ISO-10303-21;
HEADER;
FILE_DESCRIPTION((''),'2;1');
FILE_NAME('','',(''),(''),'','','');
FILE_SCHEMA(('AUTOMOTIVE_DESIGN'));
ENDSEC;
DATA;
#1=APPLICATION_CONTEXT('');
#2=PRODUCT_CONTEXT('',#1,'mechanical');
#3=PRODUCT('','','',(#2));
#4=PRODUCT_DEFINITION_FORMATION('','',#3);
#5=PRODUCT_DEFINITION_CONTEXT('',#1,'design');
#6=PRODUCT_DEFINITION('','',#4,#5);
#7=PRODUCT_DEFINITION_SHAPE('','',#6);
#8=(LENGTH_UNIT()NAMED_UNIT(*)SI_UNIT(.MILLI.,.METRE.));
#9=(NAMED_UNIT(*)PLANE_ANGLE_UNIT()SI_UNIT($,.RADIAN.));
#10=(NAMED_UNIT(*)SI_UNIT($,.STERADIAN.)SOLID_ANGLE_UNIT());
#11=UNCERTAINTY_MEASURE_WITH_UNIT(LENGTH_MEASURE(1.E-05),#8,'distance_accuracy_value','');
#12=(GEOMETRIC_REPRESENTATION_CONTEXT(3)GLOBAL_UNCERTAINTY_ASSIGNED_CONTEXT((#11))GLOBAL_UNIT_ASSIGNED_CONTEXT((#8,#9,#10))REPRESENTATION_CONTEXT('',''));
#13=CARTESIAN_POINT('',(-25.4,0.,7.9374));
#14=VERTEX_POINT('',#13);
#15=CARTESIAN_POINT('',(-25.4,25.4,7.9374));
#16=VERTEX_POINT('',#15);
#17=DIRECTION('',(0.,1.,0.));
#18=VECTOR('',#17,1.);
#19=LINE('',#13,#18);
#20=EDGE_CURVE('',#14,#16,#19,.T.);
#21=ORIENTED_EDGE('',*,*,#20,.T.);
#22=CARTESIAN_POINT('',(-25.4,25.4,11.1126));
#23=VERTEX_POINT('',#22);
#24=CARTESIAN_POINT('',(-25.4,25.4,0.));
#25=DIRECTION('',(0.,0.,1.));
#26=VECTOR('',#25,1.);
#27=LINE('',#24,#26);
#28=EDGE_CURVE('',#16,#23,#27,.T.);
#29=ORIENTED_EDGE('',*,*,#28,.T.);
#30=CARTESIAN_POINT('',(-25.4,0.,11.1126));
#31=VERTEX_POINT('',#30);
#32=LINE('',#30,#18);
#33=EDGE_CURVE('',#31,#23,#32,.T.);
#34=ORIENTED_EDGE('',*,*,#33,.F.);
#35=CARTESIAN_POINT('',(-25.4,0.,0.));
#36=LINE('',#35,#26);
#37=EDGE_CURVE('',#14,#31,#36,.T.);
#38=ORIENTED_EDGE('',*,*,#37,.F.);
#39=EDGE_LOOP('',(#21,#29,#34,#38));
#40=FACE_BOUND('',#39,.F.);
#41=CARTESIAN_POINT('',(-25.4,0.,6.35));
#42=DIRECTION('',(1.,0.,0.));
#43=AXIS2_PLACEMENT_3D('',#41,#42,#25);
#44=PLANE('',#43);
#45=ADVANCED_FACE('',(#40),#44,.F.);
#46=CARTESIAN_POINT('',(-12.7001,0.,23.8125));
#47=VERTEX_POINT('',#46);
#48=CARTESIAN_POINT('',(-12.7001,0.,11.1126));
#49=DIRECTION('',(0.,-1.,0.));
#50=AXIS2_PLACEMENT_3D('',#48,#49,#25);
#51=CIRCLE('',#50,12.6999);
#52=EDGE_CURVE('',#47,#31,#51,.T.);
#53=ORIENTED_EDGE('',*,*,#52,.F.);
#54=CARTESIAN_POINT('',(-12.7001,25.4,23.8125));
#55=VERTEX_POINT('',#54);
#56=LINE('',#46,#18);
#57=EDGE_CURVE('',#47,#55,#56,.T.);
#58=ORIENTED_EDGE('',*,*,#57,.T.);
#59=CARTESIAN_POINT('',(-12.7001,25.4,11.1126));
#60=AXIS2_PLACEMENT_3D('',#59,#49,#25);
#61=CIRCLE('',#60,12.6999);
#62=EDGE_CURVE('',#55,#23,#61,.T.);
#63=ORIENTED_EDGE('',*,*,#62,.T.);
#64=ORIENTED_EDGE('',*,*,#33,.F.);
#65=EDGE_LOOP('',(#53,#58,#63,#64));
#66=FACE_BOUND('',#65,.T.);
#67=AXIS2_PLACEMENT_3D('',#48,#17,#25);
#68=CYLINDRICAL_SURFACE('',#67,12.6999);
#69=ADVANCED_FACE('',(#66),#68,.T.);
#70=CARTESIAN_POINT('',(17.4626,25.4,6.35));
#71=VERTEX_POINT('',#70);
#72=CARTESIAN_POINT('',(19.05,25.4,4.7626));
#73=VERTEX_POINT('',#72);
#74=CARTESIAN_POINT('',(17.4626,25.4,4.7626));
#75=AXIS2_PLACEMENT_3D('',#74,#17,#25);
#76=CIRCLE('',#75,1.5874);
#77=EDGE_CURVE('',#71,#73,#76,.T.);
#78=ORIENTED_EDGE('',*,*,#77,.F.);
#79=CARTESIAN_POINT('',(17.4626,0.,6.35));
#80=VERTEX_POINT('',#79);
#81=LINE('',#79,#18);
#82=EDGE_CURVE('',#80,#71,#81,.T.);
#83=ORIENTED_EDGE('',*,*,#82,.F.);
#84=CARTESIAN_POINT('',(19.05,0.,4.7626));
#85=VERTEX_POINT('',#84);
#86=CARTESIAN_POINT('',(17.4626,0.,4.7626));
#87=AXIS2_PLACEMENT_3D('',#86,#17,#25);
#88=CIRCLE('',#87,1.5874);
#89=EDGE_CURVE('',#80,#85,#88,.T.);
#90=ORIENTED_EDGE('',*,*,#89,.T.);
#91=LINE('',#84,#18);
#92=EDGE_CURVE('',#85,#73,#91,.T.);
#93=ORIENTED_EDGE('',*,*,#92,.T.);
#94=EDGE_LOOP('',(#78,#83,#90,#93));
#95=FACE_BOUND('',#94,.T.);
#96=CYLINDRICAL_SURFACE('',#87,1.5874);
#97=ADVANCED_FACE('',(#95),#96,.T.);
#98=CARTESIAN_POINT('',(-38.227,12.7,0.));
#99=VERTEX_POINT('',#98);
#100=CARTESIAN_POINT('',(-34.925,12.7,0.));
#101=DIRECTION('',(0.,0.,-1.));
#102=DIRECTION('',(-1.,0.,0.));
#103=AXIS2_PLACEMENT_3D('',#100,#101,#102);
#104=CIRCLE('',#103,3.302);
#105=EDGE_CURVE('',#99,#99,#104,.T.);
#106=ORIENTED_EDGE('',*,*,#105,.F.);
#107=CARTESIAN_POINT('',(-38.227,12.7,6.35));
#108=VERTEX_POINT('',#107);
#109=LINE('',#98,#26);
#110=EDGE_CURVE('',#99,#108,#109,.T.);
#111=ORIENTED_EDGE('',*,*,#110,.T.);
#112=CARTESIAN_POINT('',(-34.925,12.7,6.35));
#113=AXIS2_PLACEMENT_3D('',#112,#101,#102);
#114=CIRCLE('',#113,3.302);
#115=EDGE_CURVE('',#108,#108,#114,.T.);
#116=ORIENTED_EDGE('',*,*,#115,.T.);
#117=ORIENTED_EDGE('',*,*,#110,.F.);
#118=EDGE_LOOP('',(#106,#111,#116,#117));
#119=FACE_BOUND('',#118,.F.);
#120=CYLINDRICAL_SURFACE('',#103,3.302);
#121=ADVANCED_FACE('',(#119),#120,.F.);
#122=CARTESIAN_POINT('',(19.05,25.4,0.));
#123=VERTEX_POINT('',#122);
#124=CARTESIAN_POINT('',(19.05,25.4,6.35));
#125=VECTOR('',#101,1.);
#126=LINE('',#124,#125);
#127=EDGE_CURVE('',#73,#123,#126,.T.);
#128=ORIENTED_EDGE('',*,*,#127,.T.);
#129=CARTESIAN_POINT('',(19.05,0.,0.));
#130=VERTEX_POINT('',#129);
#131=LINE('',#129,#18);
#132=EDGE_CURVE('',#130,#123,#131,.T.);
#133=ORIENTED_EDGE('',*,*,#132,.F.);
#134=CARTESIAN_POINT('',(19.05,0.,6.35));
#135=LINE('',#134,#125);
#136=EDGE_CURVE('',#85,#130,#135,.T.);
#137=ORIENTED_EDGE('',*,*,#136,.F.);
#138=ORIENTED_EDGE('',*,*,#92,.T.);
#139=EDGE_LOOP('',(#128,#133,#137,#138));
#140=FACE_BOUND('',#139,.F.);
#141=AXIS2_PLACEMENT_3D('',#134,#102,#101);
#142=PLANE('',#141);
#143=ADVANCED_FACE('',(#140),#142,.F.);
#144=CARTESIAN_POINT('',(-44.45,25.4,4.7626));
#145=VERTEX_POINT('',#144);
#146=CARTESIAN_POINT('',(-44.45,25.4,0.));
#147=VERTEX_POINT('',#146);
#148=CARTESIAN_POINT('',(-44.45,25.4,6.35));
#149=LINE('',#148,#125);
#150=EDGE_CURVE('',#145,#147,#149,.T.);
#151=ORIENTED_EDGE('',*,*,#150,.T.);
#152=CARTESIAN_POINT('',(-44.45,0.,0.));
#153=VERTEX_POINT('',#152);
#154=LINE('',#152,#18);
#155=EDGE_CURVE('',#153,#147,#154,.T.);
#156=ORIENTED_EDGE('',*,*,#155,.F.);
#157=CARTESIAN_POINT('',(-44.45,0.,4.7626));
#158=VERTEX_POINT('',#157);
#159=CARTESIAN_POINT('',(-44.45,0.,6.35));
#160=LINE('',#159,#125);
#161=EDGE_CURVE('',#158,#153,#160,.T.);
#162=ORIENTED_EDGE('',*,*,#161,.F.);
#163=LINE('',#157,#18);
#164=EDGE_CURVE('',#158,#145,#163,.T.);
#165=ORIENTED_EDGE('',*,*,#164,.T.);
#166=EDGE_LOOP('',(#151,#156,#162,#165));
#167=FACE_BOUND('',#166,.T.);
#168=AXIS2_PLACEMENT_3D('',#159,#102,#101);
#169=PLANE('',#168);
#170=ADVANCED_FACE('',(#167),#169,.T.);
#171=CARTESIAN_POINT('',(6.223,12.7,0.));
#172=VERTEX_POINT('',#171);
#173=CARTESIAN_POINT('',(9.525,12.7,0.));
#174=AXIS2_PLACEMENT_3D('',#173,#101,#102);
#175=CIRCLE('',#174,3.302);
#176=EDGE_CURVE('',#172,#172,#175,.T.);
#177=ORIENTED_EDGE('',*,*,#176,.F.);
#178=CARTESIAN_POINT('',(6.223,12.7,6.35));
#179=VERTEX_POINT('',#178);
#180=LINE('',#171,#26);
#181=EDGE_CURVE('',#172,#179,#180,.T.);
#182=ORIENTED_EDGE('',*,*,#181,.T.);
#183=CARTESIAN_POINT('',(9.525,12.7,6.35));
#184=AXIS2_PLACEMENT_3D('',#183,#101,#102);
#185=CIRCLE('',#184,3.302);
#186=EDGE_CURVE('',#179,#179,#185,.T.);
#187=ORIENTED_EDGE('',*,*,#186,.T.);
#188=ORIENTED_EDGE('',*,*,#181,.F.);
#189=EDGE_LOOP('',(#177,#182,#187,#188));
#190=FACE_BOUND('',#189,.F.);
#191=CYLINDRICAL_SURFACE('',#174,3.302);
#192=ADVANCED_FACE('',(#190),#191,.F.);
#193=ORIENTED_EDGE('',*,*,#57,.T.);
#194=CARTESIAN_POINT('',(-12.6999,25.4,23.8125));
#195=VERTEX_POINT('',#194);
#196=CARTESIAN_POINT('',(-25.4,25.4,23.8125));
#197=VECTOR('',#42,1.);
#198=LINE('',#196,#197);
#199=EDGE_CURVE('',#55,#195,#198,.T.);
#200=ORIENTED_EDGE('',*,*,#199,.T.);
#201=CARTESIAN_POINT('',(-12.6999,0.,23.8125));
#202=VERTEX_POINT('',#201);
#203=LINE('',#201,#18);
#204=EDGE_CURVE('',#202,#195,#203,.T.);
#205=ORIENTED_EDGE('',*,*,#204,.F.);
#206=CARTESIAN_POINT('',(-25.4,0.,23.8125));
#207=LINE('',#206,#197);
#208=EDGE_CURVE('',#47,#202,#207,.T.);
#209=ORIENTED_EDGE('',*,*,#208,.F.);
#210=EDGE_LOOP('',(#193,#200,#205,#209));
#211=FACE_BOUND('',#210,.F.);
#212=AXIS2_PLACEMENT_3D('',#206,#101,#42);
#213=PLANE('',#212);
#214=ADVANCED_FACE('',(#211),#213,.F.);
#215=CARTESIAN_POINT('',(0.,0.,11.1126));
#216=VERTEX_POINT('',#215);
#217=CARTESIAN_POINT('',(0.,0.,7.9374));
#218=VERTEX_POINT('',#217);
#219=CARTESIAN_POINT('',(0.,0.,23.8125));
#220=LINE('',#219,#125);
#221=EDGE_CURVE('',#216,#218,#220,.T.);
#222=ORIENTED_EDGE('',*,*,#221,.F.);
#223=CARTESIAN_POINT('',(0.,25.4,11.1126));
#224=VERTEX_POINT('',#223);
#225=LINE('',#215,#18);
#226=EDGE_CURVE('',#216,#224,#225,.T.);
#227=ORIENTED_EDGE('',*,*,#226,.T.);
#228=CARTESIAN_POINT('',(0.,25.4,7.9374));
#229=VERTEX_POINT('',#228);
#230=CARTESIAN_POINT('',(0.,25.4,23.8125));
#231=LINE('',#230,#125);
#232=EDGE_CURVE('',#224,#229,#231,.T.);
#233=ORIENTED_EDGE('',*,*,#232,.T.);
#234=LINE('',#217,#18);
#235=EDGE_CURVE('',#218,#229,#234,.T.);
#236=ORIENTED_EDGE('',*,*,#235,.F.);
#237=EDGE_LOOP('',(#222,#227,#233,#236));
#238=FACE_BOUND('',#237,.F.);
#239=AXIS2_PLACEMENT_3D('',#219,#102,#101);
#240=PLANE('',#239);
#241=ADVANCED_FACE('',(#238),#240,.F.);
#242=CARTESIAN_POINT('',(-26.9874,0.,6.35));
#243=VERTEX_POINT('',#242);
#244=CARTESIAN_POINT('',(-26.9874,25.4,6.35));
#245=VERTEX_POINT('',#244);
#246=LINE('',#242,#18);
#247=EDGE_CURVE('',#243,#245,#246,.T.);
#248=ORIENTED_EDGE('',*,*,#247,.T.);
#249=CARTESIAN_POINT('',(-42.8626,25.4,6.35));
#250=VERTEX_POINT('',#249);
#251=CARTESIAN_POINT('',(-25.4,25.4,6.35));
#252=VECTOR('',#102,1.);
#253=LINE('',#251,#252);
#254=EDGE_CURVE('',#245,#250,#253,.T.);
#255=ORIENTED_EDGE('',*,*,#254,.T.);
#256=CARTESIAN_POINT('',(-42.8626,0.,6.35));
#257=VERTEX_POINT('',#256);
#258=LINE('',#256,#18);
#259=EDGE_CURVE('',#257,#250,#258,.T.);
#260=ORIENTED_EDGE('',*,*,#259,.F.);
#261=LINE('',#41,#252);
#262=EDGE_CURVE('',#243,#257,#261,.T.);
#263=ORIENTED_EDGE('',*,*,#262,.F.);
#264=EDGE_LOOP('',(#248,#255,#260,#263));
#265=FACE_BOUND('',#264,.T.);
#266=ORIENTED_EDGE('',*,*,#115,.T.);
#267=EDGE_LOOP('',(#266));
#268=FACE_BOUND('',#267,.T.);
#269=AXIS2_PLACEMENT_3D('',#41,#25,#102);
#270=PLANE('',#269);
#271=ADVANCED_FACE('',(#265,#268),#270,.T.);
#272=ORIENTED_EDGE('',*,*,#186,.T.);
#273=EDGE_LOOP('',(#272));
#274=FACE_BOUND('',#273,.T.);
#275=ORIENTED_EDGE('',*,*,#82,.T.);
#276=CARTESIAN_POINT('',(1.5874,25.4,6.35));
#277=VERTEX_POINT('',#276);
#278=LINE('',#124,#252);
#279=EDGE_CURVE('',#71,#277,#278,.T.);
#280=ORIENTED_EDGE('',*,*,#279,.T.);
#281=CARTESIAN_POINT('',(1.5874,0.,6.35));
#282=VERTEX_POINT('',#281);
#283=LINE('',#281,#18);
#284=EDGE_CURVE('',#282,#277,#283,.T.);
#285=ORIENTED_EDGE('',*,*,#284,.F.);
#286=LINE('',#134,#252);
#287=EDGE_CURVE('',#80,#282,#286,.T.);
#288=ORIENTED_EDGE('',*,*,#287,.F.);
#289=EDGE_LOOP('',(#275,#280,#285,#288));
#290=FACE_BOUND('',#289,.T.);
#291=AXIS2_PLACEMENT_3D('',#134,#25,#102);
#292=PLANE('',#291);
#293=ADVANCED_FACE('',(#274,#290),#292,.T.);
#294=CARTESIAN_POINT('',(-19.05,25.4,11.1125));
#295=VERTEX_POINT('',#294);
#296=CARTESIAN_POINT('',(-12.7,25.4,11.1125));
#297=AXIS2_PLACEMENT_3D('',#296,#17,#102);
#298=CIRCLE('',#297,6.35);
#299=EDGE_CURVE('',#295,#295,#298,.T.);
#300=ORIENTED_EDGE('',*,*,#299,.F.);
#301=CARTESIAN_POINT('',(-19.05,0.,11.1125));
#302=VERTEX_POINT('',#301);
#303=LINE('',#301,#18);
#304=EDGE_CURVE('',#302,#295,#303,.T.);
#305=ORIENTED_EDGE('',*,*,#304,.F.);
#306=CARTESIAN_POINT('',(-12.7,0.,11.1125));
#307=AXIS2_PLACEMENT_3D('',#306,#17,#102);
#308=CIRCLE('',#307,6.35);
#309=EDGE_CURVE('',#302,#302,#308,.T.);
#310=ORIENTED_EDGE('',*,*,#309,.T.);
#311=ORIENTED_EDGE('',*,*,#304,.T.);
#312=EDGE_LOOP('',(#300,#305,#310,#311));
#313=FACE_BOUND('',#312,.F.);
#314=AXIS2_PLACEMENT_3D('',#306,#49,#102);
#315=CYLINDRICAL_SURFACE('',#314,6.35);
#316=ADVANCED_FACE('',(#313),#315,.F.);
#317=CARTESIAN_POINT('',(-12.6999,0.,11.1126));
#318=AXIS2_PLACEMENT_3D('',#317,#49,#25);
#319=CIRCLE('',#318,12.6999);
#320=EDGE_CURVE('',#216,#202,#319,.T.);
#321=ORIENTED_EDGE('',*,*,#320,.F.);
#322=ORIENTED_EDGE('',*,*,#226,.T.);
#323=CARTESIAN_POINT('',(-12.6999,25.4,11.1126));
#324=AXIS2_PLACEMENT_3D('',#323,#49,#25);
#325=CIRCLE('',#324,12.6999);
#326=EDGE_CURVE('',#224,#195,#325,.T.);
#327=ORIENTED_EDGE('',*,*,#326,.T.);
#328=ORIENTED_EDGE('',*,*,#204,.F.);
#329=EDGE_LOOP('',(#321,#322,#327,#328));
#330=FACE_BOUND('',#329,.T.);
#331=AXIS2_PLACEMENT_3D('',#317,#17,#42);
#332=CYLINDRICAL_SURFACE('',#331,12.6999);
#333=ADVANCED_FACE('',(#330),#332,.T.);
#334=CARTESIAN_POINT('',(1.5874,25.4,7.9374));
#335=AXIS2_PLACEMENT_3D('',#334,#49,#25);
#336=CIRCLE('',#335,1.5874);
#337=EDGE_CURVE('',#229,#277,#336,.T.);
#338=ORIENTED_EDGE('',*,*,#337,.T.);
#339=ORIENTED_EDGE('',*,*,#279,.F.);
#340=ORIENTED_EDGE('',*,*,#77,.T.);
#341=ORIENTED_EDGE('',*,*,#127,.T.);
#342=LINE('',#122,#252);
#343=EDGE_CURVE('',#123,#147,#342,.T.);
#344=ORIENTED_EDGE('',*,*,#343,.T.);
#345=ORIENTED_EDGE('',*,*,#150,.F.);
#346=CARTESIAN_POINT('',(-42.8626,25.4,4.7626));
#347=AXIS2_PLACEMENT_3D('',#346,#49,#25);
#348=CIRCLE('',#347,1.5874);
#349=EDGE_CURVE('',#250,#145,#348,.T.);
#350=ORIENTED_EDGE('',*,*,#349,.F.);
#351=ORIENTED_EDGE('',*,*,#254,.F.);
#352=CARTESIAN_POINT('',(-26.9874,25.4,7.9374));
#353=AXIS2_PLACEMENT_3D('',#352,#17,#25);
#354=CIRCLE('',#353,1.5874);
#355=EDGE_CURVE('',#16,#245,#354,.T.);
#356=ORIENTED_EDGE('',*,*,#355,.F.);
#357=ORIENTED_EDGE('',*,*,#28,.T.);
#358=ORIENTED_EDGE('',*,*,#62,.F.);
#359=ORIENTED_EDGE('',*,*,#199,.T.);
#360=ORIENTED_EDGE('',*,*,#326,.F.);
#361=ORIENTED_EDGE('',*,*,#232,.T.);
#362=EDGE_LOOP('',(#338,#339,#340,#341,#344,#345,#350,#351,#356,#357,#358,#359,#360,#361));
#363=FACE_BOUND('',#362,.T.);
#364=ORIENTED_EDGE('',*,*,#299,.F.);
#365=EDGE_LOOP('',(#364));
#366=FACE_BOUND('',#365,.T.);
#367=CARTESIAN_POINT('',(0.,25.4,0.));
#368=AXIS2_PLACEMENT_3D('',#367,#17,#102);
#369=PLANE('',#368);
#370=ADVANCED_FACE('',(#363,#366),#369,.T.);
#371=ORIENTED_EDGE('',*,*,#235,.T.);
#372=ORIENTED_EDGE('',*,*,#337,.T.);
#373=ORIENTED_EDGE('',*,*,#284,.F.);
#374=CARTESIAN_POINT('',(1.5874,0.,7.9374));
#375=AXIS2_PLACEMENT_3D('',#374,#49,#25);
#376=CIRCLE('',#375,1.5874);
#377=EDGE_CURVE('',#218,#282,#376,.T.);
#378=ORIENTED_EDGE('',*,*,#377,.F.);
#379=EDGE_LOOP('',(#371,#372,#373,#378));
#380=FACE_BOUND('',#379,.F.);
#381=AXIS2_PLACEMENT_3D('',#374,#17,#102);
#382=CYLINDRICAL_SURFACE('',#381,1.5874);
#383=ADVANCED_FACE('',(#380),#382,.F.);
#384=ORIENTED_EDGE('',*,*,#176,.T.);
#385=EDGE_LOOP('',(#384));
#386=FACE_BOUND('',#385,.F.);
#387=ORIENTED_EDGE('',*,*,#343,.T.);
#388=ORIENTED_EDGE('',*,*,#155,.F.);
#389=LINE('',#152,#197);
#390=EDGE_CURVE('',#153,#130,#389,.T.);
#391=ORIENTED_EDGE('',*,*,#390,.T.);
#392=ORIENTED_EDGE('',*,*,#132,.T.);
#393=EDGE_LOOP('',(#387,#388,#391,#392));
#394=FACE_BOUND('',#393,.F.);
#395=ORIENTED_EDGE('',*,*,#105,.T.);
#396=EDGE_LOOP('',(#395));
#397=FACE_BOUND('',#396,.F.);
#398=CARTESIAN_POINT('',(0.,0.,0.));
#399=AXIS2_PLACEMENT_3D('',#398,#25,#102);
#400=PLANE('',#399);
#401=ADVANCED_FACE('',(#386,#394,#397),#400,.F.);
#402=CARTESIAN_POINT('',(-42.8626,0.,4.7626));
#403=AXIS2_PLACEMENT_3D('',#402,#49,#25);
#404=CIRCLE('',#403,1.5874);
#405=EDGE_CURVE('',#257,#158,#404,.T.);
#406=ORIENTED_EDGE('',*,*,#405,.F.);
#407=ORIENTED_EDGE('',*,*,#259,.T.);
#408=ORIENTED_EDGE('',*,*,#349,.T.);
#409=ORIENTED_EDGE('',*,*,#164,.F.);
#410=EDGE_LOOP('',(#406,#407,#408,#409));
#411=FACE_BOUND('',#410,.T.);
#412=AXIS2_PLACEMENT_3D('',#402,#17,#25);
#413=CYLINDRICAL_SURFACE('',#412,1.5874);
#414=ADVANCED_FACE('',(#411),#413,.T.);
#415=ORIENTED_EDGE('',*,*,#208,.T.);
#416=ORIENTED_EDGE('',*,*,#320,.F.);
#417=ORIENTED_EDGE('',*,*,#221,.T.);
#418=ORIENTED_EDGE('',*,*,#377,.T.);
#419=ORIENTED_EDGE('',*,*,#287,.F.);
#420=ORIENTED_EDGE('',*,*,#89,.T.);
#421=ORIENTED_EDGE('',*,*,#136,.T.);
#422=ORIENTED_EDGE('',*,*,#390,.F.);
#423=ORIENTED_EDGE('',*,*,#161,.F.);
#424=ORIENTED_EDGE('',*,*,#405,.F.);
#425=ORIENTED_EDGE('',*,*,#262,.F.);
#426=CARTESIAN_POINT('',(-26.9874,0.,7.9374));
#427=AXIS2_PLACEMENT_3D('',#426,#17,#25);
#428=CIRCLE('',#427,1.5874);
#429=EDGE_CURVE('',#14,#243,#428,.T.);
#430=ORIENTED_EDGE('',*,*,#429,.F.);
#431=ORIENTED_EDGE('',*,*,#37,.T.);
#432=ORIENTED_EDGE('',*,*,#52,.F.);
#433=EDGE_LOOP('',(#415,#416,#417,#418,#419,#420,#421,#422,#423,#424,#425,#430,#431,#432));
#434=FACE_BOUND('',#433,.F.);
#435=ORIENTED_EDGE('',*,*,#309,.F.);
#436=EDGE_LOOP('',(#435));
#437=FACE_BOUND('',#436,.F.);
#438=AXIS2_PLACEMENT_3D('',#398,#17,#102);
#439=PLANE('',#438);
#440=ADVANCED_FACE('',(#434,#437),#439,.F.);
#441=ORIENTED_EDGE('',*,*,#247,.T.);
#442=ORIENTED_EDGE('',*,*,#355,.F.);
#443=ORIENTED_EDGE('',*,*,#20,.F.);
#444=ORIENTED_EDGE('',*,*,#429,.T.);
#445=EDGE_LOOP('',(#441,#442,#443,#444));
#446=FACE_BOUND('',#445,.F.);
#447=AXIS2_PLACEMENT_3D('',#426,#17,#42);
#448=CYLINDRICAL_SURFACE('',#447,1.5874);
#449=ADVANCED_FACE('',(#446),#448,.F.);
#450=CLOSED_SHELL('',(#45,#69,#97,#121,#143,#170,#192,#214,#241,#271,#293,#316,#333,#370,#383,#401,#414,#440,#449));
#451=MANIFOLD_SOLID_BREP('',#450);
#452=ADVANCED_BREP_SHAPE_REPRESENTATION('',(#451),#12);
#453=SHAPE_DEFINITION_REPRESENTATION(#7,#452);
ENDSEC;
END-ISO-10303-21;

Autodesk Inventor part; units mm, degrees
ref_plane "YZ Plane" through (0, 0, 0) normal (1, 0, 0) x (0, 1, 0)
ref_plane "XZ Plane" through (0, 0, 0) normal (0, 1, 0) x (-1, 0, 0)
ref_plane "XY Plane" through (0, 0, 0) normal (0, 0, 1) x (1, 0, 0)
sketch "Sketch1" plane through (0, 0, 0) normal (0, 1, 0) x (-1, 0, 0)
  line L0 (0, 0) -> (25.4, 0)
  line L1 (25.4, 0) -> (25.4, 23.8125)
  line L2 (25.4, 23.8125) -> (0, 23.8125)
  line L3 (0, 23.8125) -> (0, 0)
  circle A0 centre (12.7, 11.1125) radius 6.35
  line L4 (12.7, 23.8125) -> (12.7, 0) construction
  line L5 (-19.05, 6.35) -> (-19.05, 0)
  line L6 (-19.05, 0) -> (0, 0)
  line L7 (44.45, 6.35) -> (44.45, 0)
  line L8 (44.45, 0) -> (25.4, 0)
  line L9 (-19.05, 6.35) -> (0, 6.35)
  line L10 (25.4, 6.35) -> (44.45, 6.35)
  dimension "d0" = 25.4
  dimension "d1" = 23.8125
  dimension "d2" = 12.7
  dimension "d9" = 6.35
  dimension "d10" = 19.05
  dimension "d11" = 19.05
  dimension "d12" = 6.35
  dimension "d20" = 11.1125
extrude "Extrusion1" add sketch "Sketch1" along normal blind 25.4
fillet "Fillet1" radius 12.7 2 edges at (-25.4, 12.7, 23.8125) (0, 12.7, 23.8125)
fillet "Fillet1" radius 1.5875 4 edges at (-25.4, 12.7, 6.35) (0, 12.7, 6.35) (-44.45, 12.7, 6.35) (19.05, 12.7, 6.35)
sketch "Sketch2" plane through (19.05, 25.4, 0) normal (0, 0, -1) x (-1, 0, 0)
  line L0 (1.5875, 0) -> (1.5875, -25.4) construction
  line L1 (17.4625, 0) -> (1.5875, 0) construction
  line L2 (17.4625, -25.4) -> (17.4625, 0) construction
  line L3 (61.9125, -25.4) -> (61.9125, 0) construction
  line L4 (46.0375, 0) -> (46.0375, -25.4) construction
  line L5 (61.9125, 0) -> (46.0375, 0) construction
  line L6 (1.5875, -12.7) -> (17.4625, -12.7) construction
  line L7 (46.0375, -12.7) -> (61.9125, -12.7) construction
  circle A0 centre (9.525, -12.7) radius 3.302
  circle A1 centre (53.975, -12.7) radius 3.302
  line L8 (61.9125, -25.4) -> (46.0375, -25.4) projected
  line L9 (17.4625, -25.4) -> (1.5875, -25.4) projected
  point P0 (19.05, -25.4)
  dimension "d15" = 6.604
  dimension "d16" = 6.604
  dimension "d21" = 44.45
extrude "Extrusion3" cut sketch "Sketch2" against normal through all
equation "\"d9\" = d12"
equation "\"d10\" = d11"
equation "\"d16\" = d15"
properties part number "Shaft Mount V1.500 Drivetrain" material "Aluminum 6061"
